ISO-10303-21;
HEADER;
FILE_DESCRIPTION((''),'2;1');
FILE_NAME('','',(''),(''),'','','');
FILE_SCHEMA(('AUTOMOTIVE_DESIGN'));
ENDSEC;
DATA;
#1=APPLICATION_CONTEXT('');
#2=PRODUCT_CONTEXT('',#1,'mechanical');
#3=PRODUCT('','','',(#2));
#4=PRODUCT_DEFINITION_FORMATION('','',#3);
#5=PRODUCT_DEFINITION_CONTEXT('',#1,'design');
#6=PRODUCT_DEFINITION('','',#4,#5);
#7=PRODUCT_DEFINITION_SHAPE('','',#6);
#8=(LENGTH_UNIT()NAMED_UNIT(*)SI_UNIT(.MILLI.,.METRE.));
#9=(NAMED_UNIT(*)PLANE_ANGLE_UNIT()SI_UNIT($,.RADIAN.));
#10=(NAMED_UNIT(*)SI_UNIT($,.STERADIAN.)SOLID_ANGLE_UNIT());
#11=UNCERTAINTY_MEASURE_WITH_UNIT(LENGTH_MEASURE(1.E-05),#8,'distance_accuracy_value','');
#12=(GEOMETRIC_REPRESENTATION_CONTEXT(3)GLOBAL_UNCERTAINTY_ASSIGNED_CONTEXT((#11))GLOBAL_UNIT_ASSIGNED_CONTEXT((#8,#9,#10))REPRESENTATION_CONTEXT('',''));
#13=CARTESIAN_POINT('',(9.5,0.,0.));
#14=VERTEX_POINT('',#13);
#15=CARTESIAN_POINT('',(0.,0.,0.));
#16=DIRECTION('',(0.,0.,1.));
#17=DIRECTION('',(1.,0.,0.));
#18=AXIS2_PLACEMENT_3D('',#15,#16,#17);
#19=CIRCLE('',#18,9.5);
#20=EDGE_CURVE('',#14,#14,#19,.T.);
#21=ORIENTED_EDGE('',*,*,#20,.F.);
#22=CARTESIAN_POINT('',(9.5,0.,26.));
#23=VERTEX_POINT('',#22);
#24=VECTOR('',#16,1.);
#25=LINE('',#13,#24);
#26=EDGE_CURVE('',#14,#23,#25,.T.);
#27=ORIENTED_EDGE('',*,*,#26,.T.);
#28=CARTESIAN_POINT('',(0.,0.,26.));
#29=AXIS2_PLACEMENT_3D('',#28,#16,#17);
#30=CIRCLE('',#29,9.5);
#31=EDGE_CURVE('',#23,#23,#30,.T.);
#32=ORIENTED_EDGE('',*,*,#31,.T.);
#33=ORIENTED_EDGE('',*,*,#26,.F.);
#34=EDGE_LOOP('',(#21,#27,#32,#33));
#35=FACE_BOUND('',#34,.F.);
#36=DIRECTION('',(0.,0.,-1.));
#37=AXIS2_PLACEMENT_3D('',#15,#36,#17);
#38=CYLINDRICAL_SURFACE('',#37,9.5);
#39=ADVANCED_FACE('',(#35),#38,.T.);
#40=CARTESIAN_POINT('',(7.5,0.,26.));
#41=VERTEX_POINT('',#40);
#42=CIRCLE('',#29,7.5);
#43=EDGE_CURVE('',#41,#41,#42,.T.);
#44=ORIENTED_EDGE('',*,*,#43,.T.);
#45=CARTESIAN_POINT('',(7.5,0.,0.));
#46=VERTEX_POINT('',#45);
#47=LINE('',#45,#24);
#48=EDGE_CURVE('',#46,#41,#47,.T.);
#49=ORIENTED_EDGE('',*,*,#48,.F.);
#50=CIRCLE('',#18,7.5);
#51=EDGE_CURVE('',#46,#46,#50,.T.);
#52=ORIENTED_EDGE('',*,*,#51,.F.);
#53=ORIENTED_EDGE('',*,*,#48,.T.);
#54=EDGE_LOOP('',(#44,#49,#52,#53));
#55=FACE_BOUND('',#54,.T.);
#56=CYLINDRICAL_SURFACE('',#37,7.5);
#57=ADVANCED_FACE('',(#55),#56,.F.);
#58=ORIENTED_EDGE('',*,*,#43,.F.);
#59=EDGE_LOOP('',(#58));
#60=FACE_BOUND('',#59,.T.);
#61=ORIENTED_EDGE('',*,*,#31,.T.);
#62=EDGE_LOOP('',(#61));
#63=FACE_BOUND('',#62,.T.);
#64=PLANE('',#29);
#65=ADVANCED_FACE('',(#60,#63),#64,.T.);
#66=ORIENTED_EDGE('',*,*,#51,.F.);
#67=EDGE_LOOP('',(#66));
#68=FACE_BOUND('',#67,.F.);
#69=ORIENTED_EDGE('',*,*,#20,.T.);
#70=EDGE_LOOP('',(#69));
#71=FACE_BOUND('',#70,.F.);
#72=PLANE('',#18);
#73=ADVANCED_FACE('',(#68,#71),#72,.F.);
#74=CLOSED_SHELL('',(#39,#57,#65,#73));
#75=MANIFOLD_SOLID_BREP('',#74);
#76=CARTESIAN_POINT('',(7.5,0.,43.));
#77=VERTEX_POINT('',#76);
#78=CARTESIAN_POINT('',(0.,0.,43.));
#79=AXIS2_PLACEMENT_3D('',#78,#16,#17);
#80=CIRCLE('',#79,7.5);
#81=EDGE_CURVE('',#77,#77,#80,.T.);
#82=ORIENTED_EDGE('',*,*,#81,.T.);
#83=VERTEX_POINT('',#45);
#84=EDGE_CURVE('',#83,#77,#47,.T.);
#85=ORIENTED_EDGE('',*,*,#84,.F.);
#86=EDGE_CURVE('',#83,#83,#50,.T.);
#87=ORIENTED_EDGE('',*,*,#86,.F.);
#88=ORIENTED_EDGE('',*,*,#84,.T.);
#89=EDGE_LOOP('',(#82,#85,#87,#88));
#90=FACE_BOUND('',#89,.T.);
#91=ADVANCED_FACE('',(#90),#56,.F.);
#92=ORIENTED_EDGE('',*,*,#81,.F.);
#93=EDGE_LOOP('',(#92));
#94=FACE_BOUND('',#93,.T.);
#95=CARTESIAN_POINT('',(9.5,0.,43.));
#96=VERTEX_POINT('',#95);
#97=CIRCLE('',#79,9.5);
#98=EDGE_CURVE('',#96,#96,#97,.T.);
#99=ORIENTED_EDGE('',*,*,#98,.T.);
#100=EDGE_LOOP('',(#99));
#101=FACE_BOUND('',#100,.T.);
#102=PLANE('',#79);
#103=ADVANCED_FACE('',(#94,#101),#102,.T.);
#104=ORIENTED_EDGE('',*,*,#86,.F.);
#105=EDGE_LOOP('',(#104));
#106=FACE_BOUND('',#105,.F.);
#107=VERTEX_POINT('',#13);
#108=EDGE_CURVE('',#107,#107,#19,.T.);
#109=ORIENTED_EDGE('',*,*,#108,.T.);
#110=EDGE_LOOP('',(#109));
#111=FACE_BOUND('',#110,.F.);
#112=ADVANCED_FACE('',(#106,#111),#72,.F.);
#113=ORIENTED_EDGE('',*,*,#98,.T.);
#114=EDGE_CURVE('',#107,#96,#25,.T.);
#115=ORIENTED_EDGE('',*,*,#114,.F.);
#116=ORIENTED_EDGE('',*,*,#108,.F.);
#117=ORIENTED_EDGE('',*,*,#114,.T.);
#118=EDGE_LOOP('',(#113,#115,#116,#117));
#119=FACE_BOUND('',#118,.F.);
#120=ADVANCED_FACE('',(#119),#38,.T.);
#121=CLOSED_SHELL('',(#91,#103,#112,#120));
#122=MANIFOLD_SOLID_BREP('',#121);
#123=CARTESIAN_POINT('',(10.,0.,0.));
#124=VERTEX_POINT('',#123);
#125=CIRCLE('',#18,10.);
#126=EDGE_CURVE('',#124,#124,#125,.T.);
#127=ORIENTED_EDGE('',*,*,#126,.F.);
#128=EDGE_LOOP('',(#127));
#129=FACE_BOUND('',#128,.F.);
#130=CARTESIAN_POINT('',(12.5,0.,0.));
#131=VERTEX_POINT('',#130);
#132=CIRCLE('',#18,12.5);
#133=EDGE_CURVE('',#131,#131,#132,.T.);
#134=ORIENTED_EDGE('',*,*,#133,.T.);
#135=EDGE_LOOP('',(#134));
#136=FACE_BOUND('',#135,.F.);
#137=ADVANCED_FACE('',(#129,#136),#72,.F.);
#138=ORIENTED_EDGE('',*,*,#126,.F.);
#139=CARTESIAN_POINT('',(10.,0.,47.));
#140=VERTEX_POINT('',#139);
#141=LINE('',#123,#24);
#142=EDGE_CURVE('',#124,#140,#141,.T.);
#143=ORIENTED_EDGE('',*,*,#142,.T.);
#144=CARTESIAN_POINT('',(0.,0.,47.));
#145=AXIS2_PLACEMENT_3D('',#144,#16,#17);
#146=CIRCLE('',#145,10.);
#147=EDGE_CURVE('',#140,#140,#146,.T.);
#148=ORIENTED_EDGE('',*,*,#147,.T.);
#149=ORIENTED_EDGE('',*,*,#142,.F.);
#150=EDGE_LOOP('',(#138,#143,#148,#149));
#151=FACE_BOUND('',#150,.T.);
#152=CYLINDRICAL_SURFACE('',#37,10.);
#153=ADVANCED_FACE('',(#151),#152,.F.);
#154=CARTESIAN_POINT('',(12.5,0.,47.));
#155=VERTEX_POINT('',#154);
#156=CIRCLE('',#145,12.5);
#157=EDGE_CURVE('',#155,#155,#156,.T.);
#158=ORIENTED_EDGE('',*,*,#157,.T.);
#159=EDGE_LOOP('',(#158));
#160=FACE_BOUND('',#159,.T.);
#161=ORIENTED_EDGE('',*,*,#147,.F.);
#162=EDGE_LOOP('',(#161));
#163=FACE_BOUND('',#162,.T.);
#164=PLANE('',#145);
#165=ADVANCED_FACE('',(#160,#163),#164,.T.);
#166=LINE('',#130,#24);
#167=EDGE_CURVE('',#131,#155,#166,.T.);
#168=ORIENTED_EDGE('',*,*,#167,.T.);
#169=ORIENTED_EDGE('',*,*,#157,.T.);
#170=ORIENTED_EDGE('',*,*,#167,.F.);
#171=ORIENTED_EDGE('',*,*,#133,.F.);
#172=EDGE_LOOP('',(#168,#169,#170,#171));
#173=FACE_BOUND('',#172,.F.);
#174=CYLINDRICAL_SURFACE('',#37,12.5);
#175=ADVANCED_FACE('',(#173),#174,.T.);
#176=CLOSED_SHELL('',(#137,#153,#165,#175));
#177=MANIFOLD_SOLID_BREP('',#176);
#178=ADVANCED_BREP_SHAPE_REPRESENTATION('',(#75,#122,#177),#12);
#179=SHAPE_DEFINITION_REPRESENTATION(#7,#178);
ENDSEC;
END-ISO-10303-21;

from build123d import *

# Parameters (mm, degrees)
F0_R      = 12.5
F0_R_2    = 10
F1_DEPTH  = 47
F4_T      = -2
F7_T      = -2
F9_R      = 9.5
F9_R_2    = 7.5
F10_DEPTH = 26
F11_DEPTH = 43


# Not quite as in the source:
# - a shell that OpenCascade refuses in one call is made with other operations: the cavity is built on its own and cut out


with BuildPart() as f1:
    # F0 (on Top) → F1 (new body)
    with BuildSketch(Plane.XY):
        Circle(F0_R)
        Circle(F0_R_2, mode=Mode.SUBTRACT)
    extrude(amount=F1_DEPTH)


with BuildPart() as f3:
    # F2 (on Right) → F3 (revolve)
    with BuildSketch(Plane.YZ):
        with BuildLine():
            Line((-7.5, 6), (-7.5, 0))
            Line((-7.5, 0), (0, 0))
            Line((0, 0), (0, 26))
            Line((0, 26), (-9.5, 26))
            Line((-9.5, 26), (-9.5, 11))
            add(Edge.make_bspline(
                [(-9.5, 11), (-9.4961709784, 9.3502644282), (-8.3647090448, 8.5490267521), (-7.7744109319, 7.5516820676), (-7.5, 6)],
                knots=[0, 0, 0, 0, 0.5, 1, 1, 1, 1], degree=3))
        make_face()
    revolve(axis=Axis((0, 0, 13), (0, 0, 1)))

    # F4
    f4_openings = [f3.faces().sort_by_distance(p)[0] for p in [
        (0, 0, 26),
        (0, 0, 0),
    ]]
    offset(amount=F4_T, openings=f4_openings)

    # F5 (on Right) → F6 (revolve)
    with BuildSketch(Plane.YZ):
        with BuildLine():
            Line((262.8517738675, 184.9563693243), (262.8517738675, 178.9563693243))
            Line((262.8517738675, 178.9563693243), (270.3517738675, 178.9563693243))
            Line((270.3517738675, 178.9563693243), (270.3517738675, 204.9563693243))
            Line((270.3517738675, 204.9563693243), (260.8517738675, 204.9563693243))
            Line((260.8517738675, 204.9563693243), (260.8517738675, 192.9563693243))
            add(Edge.make_bspline(
                [(260.8517738675, 192.9563693243), (261.0294527264, 189.8867335533), (261.6645518108, 189.6724810667), (263.0485391221, 186.5937816102), (262.8517738675, 184.9563693243)],
                knots=[0, 0, 0, 0, 0.5, 1, 1, 1, 1], degree=3))
        make_face()
        with BuildLine():
            Line((-7.5, 8), (-7.5, 0))
            Line((-7.5, 0), (0, 0))
            Line((0, 0), (0, 43))
            Line((0, 43), (-9.5, 43))
            Line((-9.5, 43), (-9.5, 13))
            add(Edge.make_bspline(
                [(-9.5, 13), (-9.4583500177, 11.7673277855), (-8.4318036754, 10.2421248369), (-7.6780426316, 9.7484225407), (-7.5, 8)],
                knots=[0, 0, 0, 0, 0.5, 1, 1, 1, 1], degree=3))
        make_face()
    revolve(axis=Axis((0, 0, 21.5), (0, 0, 1)))

    # F7: a shell. OpenCascade refuses it in one call, so the cavity is built on its own and cut out:
    # the body offset inwards by the wall thickness, plus a prism from it out through each open face.
    f7_core = offset(f3.part, amount=F7_T, mode=Mode.PRIVATE)
    f7_exits = [f7_core.faces().sort_by_distance(p)[0] for p in [
        (0, 0, 41),
        (0, 0, 2),
    ]]
    add(f7_core, mode=Mode.SUBTRACT)
    extrude(f7_exits, amount=-F7_T, mode=Mode.SUBTRACT)


with BuildPart() as f10:
    # F9 (on Top) → F10 (new body)
    with BuildSketch(Plane.XY):
        Circle(F9_R)
        Circle(F9_R_2, mode=Mode.SUBTRACT)
    extrude(amount=F10_DEPTH)


with BuildPart() as f11:
    # F9 (on Top) → F11 (new body)
    with BuildSketch(Plane.XY):
        Circle(F9_R)
        Circle(F9_R_2, mode=Mode.SUBTRACT)
    extrude(amount=F11_DEPTH)


solid = Compound([f1.part, f10.part, f11.part])
